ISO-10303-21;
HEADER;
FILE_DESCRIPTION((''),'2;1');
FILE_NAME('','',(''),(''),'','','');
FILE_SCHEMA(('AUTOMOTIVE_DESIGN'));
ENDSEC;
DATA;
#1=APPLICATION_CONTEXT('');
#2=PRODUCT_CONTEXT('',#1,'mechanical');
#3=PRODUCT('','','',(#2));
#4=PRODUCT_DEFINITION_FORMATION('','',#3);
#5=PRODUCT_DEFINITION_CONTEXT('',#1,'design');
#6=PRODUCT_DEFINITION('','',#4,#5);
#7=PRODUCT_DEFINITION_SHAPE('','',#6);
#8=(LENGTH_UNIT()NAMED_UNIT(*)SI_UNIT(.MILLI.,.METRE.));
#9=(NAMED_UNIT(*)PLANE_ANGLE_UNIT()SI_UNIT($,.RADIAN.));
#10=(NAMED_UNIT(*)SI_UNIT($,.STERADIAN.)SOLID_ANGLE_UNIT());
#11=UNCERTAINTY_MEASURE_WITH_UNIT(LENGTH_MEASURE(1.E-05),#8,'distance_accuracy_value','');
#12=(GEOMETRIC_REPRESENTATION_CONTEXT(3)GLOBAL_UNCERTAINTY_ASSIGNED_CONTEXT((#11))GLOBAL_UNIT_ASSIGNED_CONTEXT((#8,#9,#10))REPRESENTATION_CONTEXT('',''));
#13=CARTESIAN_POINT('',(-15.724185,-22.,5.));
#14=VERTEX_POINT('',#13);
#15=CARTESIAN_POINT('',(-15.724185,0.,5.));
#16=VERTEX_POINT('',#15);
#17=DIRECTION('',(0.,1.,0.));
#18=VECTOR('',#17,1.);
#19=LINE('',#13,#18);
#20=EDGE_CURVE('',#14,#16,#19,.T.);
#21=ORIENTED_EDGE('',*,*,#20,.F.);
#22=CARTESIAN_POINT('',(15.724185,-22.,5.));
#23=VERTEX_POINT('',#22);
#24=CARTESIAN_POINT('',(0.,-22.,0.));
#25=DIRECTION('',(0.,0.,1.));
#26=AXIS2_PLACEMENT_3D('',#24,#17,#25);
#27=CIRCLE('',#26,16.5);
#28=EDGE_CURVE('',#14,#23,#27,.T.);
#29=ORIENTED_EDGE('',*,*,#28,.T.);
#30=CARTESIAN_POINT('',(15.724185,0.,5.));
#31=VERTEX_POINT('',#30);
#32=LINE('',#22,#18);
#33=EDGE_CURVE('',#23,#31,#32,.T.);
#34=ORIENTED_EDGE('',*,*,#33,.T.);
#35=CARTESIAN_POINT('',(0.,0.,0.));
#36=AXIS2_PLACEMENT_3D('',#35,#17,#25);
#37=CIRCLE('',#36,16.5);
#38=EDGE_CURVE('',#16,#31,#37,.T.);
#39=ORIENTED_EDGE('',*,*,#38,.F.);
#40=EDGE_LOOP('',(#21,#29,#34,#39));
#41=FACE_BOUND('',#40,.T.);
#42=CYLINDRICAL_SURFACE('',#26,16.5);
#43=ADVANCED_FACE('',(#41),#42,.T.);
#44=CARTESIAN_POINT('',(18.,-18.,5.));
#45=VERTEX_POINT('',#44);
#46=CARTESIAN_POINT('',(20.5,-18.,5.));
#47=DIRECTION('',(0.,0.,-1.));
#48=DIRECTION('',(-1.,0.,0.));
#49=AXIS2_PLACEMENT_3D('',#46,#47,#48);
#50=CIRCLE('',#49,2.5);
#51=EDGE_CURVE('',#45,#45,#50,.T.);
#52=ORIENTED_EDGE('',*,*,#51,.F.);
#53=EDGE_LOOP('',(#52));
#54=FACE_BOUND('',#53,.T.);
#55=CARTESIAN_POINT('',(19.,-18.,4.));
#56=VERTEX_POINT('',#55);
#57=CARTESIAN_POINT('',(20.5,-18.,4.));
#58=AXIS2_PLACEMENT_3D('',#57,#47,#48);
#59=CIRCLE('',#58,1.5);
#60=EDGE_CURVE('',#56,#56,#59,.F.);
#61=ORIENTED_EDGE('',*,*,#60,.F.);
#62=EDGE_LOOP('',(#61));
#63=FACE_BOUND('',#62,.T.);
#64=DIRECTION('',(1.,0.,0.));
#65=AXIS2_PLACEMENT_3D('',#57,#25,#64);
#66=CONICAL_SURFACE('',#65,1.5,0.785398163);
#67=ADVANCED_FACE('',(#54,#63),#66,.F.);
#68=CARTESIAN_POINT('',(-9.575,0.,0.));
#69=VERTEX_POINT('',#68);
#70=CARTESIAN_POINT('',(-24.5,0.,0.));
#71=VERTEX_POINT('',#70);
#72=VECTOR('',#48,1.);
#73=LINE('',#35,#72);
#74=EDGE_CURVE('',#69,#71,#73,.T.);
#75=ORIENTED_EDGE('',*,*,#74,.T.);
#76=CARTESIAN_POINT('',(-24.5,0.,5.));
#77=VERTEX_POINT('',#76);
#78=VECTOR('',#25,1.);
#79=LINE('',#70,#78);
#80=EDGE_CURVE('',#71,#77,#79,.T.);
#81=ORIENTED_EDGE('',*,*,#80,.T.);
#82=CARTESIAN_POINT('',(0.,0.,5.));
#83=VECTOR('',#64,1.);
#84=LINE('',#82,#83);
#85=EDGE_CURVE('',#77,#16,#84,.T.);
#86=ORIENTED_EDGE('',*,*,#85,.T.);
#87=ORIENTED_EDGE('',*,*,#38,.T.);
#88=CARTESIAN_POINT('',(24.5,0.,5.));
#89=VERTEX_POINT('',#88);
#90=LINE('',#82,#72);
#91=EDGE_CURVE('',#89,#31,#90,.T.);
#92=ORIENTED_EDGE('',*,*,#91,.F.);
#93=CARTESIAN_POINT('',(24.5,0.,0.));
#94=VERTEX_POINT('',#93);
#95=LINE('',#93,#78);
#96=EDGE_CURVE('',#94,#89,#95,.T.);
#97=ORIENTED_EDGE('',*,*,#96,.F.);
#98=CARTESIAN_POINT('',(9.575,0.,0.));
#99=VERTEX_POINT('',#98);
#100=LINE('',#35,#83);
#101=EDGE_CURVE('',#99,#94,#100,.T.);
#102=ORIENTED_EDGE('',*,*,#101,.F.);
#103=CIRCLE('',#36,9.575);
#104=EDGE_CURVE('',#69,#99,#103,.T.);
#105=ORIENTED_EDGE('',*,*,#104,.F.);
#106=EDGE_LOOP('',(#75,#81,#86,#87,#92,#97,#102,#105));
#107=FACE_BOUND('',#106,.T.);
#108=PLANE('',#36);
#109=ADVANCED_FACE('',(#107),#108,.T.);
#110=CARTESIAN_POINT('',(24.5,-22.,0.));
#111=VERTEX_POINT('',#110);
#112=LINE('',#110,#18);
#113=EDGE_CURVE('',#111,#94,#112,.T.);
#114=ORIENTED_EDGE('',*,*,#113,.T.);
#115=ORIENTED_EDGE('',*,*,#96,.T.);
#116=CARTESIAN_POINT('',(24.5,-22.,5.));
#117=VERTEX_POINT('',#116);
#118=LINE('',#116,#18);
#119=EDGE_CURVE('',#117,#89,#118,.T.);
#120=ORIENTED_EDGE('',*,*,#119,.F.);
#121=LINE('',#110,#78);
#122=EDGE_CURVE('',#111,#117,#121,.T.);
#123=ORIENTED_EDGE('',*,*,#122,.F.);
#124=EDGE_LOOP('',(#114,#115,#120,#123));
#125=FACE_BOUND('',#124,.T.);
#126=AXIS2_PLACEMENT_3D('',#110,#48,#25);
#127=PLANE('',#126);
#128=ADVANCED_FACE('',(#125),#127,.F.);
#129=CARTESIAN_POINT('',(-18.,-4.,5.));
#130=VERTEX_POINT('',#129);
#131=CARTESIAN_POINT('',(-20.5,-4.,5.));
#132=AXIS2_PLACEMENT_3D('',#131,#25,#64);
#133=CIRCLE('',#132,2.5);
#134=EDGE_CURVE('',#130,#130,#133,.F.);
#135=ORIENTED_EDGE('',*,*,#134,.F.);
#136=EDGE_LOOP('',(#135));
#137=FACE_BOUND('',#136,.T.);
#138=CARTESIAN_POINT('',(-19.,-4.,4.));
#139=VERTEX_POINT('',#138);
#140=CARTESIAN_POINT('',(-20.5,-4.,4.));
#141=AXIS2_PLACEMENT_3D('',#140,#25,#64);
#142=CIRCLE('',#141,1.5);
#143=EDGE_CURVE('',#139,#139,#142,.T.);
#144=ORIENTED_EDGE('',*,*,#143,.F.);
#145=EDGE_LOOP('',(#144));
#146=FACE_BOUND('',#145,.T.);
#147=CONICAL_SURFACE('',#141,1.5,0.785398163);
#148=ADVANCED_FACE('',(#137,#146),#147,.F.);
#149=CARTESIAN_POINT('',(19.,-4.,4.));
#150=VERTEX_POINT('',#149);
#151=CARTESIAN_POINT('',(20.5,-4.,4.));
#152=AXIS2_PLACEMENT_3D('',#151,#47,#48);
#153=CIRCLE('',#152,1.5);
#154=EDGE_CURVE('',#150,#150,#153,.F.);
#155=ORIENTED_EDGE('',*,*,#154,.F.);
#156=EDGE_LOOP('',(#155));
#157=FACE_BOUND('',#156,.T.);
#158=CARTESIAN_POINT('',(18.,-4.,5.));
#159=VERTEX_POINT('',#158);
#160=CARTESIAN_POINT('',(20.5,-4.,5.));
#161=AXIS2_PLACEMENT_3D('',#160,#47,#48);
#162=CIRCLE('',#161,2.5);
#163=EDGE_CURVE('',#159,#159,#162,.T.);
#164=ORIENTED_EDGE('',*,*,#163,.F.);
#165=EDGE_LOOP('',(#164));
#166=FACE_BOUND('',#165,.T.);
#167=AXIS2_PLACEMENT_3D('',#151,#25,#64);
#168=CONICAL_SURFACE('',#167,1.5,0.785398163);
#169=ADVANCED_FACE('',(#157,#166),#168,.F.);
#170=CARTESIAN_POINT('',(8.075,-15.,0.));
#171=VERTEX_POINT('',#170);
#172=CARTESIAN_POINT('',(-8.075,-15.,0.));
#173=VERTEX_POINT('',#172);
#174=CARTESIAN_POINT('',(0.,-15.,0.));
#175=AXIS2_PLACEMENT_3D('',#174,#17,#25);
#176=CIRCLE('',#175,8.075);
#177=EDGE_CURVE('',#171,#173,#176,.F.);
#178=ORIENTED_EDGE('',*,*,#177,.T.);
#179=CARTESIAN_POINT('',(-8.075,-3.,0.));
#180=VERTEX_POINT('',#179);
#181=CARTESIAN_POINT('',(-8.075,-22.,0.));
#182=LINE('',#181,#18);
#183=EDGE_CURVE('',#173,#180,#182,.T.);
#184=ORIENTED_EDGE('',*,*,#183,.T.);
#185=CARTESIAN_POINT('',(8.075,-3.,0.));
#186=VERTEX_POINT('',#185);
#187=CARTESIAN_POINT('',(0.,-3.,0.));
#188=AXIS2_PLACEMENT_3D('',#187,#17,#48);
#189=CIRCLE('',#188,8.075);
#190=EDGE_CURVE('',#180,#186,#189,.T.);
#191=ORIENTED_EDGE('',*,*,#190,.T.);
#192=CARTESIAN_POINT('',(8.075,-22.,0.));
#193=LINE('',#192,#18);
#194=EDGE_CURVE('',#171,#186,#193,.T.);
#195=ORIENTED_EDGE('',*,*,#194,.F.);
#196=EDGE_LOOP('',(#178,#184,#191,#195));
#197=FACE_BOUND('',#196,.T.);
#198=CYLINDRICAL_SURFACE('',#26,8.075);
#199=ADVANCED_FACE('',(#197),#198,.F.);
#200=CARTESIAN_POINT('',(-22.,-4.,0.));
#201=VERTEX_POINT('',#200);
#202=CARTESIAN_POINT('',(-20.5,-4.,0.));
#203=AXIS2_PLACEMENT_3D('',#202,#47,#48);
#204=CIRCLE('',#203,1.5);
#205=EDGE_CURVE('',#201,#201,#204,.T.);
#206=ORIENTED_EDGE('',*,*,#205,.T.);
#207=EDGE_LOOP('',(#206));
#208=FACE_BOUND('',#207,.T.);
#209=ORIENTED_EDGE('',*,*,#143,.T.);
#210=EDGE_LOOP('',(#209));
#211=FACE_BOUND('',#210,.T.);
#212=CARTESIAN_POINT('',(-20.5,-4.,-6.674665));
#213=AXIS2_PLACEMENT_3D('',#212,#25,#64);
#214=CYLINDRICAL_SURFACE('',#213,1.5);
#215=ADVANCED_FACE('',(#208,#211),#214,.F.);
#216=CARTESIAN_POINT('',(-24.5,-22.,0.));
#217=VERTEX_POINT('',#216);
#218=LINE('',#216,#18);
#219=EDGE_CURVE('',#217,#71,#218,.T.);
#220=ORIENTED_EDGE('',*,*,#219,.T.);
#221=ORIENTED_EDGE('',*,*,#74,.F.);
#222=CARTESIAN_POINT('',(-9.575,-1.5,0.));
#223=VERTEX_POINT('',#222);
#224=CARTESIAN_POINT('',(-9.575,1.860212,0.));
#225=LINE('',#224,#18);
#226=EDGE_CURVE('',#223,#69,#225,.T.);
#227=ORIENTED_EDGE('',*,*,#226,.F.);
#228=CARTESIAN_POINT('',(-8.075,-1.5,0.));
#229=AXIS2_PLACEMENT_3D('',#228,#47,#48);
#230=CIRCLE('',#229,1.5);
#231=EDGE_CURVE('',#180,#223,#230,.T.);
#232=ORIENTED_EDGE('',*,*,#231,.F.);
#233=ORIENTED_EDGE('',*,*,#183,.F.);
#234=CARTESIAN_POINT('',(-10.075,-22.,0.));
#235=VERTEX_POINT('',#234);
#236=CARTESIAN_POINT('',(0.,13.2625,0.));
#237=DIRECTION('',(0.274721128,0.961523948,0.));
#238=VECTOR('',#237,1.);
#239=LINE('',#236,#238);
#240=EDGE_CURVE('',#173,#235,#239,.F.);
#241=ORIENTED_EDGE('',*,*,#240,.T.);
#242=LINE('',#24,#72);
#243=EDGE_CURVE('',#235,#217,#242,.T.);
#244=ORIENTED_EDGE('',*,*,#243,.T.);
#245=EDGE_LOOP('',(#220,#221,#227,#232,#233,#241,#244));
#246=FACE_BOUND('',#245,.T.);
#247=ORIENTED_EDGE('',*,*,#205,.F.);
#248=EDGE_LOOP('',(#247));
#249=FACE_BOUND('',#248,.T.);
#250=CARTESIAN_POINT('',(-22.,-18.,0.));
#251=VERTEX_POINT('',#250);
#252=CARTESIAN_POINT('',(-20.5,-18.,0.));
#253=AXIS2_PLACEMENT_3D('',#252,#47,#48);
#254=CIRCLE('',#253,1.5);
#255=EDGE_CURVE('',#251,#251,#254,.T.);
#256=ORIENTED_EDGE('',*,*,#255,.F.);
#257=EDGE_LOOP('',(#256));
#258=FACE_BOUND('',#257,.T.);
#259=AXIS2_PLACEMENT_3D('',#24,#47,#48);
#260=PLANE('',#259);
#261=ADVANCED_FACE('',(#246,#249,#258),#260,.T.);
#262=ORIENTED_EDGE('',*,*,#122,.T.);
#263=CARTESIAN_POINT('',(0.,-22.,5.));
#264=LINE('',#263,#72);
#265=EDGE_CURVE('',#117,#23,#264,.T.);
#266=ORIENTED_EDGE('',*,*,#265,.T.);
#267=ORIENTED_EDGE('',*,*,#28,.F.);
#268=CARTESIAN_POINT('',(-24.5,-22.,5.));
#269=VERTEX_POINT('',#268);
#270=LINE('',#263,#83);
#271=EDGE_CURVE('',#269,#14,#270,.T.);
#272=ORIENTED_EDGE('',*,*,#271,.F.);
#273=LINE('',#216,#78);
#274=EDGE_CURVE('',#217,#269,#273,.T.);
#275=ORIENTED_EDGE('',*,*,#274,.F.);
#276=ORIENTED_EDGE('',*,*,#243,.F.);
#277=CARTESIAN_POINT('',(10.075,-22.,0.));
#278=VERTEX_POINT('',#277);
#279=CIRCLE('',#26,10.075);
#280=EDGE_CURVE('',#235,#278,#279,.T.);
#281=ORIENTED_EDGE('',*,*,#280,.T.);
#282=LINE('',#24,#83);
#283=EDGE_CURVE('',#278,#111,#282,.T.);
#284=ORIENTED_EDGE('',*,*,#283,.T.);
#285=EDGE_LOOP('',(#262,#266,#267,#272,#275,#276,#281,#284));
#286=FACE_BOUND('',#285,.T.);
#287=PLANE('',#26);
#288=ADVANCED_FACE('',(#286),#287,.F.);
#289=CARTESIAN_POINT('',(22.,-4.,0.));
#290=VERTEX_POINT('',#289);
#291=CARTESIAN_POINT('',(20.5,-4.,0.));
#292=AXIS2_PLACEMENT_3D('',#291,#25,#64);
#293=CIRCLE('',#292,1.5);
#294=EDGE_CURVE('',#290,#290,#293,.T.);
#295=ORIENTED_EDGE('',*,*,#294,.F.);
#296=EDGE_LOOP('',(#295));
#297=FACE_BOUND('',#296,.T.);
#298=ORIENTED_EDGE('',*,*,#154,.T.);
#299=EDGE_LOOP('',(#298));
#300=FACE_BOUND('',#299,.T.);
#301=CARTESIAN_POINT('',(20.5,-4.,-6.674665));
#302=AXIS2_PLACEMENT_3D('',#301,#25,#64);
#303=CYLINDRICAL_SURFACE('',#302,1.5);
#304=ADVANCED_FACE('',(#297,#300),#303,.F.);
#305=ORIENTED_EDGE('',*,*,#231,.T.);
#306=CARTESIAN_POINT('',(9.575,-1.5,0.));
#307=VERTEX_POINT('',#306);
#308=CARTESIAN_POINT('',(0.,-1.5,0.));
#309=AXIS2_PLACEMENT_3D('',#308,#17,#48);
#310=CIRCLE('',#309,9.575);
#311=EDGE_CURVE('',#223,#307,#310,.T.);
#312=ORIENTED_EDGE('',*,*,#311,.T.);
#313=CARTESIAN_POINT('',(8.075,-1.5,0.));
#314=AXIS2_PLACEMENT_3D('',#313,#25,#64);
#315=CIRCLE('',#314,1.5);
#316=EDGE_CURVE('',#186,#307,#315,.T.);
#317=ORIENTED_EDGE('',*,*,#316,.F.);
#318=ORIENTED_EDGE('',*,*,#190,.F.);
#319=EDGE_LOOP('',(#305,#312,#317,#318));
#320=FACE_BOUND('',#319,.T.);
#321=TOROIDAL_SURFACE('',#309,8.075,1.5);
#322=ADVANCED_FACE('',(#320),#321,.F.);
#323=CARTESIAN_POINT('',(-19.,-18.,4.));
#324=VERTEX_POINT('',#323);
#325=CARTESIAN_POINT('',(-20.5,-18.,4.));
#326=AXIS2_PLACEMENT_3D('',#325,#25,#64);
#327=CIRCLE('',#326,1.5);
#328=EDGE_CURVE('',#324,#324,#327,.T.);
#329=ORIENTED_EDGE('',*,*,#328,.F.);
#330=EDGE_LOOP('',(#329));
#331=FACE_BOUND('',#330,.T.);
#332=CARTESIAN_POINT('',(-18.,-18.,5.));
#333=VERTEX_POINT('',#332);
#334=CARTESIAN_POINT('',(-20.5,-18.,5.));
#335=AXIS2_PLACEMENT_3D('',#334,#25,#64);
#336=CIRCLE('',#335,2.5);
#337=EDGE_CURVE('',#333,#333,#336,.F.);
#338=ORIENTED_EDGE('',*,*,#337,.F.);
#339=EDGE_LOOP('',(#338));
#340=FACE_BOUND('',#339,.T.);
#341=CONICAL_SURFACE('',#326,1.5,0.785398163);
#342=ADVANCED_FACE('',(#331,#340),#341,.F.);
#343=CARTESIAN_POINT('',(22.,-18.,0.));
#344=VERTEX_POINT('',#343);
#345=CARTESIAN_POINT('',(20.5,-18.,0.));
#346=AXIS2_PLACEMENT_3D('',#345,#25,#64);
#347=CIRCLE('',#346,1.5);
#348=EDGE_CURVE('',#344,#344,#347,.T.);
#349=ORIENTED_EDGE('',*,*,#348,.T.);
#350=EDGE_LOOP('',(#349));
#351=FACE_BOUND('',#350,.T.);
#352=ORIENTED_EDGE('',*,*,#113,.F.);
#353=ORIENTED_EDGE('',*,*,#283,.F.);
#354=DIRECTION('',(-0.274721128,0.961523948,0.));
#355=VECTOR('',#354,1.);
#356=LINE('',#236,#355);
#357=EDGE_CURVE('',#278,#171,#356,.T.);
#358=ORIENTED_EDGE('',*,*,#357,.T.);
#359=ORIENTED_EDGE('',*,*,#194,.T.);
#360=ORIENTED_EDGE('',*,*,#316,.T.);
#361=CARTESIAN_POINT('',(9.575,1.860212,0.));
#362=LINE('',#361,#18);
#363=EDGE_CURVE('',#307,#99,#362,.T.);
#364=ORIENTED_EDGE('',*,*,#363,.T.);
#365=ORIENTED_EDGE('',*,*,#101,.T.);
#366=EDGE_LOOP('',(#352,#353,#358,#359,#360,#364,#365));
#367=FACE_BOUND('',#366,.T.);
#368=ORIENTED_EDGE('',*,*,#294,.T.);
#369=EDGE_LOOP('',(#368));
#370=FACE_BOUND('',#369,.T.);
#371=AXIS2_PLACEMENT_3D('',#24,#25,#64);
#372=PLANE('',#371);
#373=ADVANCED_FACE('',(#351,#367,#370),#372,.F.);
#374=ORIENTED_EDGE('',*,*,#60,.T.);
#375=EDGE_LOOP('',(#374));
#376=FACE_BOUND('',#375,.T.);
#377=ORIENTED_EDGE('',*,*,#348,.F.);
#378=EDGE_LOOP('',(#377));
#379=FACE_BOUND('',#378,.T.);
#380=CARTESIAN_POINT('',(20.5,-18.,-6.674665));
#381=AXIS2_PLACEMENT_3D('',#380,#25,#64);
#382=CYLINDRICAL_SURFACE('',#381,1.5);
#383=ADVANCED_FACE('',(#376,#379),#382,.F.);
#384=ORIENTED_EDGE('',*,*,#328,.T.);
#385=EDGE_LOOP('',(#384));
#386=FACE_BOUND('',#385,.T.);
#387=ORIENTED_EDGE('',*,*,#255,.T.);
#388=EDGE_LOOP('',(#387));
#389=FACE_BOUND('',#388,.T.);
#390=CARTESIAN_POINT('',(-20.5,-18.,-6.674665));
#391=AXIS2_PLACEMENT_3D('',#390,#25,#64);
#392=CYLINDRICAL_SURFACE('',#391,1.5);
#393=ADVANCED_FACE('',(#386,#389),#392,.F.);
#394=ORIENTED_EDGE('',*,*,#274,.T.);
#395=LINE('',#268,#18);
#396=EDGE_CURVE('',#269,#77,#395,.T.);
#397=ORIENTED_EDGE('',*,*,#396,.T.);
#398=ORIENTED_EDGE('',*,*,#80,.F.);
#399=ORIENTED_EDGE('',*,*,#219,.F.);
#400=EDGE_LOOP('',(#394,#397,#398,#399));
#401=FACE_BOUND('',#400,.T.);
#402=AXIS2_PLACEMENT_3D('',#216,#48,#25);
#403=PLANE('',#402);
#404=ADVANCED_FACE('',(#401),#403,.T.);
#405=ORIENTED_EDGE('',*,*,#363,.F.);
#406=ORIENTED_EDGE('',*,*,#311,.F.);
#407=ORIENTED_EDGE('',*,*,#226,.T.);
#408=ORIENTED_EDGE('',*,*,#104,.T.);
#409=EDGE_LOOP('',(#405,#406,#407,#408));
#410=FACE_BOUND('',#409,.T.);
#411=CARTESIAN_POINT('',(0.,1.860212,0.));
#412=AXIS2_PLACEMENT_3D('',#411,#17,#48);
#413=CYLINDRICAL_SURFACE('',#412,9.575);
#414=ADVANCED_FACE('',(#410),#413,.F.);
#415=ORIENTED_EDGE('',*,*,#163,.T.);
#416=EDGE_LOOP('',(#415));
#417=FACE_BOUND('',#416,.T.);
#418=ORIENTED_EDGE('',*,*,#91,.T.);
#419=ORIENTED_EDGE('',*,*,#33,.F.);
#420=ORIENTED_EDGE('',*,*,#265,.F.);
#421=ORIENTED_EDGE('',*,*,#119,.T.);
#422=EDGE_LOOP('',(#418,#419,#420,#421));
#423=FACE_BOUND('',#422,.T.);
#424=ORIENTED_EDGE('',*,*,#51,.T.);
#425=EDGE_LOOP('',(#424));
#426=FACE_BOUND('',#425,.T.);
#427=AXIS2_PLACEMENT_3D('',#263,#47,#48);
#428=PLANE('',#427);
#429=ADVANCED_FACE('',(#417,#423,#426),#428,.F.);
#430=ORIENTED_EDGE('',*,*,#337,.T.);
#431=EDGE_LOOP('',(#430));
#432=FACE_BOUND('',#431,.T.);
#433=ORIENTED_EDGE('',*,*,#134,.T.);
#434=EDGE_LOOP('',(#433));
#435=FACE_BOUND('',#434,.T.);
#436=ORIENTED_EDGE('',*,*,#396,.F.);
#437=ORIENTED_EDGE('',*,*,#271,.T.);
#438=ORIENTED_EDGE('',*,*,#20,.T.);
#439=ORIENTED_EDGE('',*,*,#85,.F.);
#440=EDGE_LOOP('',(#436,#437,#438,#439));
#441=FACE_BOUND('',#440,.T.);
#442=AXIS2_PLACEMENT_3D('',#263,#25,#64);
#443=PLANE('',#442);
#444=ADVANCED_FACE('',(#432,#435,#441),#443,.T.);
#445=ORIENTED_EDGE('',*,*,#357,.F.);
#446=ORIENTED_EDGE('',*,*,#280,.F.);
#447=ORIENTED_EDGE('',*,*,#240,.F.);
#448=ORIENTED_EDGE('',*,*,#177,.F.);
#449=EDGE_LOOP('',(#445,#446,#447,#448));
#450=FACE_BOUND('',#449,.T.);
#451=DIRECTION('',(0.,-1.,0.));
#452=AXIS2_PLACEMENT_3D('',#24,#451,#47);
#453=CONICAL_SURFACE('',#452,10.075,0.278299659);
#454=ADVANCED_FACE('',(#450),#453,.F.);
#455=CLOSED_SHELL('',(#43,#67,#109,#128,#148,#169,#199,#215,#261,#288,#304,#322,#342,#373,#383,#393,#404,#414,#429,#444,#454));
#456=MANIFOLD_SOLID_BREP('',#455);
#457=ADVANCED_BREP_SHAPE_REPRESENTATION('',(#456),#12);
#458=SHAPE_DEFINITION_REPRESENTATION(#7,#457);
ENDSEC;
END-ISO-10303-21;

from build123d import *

# Parameters (mm, degrees)
BOSS_EXTRUDE1_DEPTH     = 22
BOSS_EXTRUDE3_START     = -5
BOSS_EXTRUDE3_OUTLINE_R = 1.5
BOSS_EXTRUDE3_DEPTH     = 5
CHAMFER2_SIZE           = 1
CHAMFER3_SIZE           = 7
CHAMFER3_SIZE2          = 2


# Read off the part's stored shape, not the designer's step: Boss-Extrude3
with BuildPart() as part:
    # Sketch1 → Boss-Extrude1 (new body)
    with BuildSketch(Plane(origin=(0, 0, 0), x_dir=(1, 0, 0), z_dir=(0, 1, 0))):
        with BuildLine():
            Line((0, -16.5), (0, -8.075))
            ThreePointArc((3.5438e-13, -8.075), (-5.709887258081245, -5.709887258081495), (-8.075, 1.03e-15))
            Line((-8.075, 0), (-16.5, 0))
            Line((-16.5, 0), (-24.5, -9.8e-16))
            Line((-24.5, -9.8e-16), (-24.5, -5.000000000000001))
            Line((-24.5, -5.000000000000001), (-15.724185193516389, -5.000000000000001))
            ThreePointArc((-15.724185193516387, -5), (-9.740379869388931, -13.318220601867306), (3.5527e-13, -16.5))
        make_face()
        with BuildLine():
            Line((24.5, -9.8e-16), (16.5, 0))
            Line((16.5, 0), (8.075, 0))
            ThreePointArc((8.075, 3.34e-15), (5.709887258081497, -5.709887258081244), (3.5438e-13, -8.075))
            Line((0, -8.075), (0, -16.5))
            ThreePointArc((3.5527e-13, -16.5), (9.74037986938922, -13.3182206018671), (15.724185193516387, -5.000000000000004))
            Line((15.724185193516389, -5.000000000000001), (24.5, -5.000000000000001))
            Line((24.5, -5.000000000000001), (24.5, -9.8e-16))
        make_face()
    extrude(amount=-BOSS_EXTRUDE1_DEPTH)

    # Boss-Extrude3 outline → Boss-Extrude3 (cut)
    with BuildSketch(Plane.XY.offset(5.000000000000001).offset(BOSS_EXTRUDE3_START)):
        with Locations((20.5, -18)):
            Circle(BOSS_EXTRUDE3_OUTLINE_R)
        with Locations((20.5, -4)):
            Circle(BOSS_EXTRUDE3_OUTLINE_R)
        with Locations((-20.5, -4)):
            Circle(BOSS_EXTRUDE3_OUTLINE_R)
        with Locations((-20.5, -18)):
            Circle(BOSS_EXTRUDE3_OUTLINE_R)
    extrude(amount=BOSS_EXTRUDE3_DEPTH, mode=Mode.SUBTRACT)

    # Chamfer2
    chamfer2_edges = [part.edges().sort_by_distance(p)[0] for p in [
        (-22, -18, 5.000000000000001),
        (19, -4, 5.000000000000001),
        (19, -18, 5.000000000000001),
        (-22, -4, 5.000000000000001),
    ]]
    chamfer(chamfer2_edges, length=CHAMFER2_SIZE)

    # Chamfer3
    chamfer3_edges = [part.edges().sort_by_distance(p)[0] for p in [
        (1.54e-15, -22, 8.075),
    ]]
    chamfer3_side = [part.faces().sort_by_distance(p)[0] for p in [
        (2.05e-15, -11, 8.075),
    ]]
    chamfer(chamfer3_edges, length=CHAMFER3_SIZE, length2=CHAMFER3_SIZE2, reference=chamfer3_side[0])

    # Sketch4 → Cut-Revolve1 (revolve, cut)
    with BuildSketch(Plane(origin=(0, 0, 0), x_dir=(-1, 0, -1.2e-16), z_dir=(1.2e-16, 0, -1))):
        with BuildLine():
            Line((-9.575, 0.4703111185771576), (-9.575, -1.4999999999999998))
            ThreePointArc((-9.575, -1.4999999999999998), (-7.014339828220178, -2.560660171779821), (-8.075, 0))
            Line((-8.075, 0), (-9.575, 0.4703111185771576))
        make_face()
    revolve(axis=Axis((4.3e-16, 1.8602118411515838, 0), (-1.7e-16, -1, 0)), mode=Mode.SUBTRACT)


solid = part.part
